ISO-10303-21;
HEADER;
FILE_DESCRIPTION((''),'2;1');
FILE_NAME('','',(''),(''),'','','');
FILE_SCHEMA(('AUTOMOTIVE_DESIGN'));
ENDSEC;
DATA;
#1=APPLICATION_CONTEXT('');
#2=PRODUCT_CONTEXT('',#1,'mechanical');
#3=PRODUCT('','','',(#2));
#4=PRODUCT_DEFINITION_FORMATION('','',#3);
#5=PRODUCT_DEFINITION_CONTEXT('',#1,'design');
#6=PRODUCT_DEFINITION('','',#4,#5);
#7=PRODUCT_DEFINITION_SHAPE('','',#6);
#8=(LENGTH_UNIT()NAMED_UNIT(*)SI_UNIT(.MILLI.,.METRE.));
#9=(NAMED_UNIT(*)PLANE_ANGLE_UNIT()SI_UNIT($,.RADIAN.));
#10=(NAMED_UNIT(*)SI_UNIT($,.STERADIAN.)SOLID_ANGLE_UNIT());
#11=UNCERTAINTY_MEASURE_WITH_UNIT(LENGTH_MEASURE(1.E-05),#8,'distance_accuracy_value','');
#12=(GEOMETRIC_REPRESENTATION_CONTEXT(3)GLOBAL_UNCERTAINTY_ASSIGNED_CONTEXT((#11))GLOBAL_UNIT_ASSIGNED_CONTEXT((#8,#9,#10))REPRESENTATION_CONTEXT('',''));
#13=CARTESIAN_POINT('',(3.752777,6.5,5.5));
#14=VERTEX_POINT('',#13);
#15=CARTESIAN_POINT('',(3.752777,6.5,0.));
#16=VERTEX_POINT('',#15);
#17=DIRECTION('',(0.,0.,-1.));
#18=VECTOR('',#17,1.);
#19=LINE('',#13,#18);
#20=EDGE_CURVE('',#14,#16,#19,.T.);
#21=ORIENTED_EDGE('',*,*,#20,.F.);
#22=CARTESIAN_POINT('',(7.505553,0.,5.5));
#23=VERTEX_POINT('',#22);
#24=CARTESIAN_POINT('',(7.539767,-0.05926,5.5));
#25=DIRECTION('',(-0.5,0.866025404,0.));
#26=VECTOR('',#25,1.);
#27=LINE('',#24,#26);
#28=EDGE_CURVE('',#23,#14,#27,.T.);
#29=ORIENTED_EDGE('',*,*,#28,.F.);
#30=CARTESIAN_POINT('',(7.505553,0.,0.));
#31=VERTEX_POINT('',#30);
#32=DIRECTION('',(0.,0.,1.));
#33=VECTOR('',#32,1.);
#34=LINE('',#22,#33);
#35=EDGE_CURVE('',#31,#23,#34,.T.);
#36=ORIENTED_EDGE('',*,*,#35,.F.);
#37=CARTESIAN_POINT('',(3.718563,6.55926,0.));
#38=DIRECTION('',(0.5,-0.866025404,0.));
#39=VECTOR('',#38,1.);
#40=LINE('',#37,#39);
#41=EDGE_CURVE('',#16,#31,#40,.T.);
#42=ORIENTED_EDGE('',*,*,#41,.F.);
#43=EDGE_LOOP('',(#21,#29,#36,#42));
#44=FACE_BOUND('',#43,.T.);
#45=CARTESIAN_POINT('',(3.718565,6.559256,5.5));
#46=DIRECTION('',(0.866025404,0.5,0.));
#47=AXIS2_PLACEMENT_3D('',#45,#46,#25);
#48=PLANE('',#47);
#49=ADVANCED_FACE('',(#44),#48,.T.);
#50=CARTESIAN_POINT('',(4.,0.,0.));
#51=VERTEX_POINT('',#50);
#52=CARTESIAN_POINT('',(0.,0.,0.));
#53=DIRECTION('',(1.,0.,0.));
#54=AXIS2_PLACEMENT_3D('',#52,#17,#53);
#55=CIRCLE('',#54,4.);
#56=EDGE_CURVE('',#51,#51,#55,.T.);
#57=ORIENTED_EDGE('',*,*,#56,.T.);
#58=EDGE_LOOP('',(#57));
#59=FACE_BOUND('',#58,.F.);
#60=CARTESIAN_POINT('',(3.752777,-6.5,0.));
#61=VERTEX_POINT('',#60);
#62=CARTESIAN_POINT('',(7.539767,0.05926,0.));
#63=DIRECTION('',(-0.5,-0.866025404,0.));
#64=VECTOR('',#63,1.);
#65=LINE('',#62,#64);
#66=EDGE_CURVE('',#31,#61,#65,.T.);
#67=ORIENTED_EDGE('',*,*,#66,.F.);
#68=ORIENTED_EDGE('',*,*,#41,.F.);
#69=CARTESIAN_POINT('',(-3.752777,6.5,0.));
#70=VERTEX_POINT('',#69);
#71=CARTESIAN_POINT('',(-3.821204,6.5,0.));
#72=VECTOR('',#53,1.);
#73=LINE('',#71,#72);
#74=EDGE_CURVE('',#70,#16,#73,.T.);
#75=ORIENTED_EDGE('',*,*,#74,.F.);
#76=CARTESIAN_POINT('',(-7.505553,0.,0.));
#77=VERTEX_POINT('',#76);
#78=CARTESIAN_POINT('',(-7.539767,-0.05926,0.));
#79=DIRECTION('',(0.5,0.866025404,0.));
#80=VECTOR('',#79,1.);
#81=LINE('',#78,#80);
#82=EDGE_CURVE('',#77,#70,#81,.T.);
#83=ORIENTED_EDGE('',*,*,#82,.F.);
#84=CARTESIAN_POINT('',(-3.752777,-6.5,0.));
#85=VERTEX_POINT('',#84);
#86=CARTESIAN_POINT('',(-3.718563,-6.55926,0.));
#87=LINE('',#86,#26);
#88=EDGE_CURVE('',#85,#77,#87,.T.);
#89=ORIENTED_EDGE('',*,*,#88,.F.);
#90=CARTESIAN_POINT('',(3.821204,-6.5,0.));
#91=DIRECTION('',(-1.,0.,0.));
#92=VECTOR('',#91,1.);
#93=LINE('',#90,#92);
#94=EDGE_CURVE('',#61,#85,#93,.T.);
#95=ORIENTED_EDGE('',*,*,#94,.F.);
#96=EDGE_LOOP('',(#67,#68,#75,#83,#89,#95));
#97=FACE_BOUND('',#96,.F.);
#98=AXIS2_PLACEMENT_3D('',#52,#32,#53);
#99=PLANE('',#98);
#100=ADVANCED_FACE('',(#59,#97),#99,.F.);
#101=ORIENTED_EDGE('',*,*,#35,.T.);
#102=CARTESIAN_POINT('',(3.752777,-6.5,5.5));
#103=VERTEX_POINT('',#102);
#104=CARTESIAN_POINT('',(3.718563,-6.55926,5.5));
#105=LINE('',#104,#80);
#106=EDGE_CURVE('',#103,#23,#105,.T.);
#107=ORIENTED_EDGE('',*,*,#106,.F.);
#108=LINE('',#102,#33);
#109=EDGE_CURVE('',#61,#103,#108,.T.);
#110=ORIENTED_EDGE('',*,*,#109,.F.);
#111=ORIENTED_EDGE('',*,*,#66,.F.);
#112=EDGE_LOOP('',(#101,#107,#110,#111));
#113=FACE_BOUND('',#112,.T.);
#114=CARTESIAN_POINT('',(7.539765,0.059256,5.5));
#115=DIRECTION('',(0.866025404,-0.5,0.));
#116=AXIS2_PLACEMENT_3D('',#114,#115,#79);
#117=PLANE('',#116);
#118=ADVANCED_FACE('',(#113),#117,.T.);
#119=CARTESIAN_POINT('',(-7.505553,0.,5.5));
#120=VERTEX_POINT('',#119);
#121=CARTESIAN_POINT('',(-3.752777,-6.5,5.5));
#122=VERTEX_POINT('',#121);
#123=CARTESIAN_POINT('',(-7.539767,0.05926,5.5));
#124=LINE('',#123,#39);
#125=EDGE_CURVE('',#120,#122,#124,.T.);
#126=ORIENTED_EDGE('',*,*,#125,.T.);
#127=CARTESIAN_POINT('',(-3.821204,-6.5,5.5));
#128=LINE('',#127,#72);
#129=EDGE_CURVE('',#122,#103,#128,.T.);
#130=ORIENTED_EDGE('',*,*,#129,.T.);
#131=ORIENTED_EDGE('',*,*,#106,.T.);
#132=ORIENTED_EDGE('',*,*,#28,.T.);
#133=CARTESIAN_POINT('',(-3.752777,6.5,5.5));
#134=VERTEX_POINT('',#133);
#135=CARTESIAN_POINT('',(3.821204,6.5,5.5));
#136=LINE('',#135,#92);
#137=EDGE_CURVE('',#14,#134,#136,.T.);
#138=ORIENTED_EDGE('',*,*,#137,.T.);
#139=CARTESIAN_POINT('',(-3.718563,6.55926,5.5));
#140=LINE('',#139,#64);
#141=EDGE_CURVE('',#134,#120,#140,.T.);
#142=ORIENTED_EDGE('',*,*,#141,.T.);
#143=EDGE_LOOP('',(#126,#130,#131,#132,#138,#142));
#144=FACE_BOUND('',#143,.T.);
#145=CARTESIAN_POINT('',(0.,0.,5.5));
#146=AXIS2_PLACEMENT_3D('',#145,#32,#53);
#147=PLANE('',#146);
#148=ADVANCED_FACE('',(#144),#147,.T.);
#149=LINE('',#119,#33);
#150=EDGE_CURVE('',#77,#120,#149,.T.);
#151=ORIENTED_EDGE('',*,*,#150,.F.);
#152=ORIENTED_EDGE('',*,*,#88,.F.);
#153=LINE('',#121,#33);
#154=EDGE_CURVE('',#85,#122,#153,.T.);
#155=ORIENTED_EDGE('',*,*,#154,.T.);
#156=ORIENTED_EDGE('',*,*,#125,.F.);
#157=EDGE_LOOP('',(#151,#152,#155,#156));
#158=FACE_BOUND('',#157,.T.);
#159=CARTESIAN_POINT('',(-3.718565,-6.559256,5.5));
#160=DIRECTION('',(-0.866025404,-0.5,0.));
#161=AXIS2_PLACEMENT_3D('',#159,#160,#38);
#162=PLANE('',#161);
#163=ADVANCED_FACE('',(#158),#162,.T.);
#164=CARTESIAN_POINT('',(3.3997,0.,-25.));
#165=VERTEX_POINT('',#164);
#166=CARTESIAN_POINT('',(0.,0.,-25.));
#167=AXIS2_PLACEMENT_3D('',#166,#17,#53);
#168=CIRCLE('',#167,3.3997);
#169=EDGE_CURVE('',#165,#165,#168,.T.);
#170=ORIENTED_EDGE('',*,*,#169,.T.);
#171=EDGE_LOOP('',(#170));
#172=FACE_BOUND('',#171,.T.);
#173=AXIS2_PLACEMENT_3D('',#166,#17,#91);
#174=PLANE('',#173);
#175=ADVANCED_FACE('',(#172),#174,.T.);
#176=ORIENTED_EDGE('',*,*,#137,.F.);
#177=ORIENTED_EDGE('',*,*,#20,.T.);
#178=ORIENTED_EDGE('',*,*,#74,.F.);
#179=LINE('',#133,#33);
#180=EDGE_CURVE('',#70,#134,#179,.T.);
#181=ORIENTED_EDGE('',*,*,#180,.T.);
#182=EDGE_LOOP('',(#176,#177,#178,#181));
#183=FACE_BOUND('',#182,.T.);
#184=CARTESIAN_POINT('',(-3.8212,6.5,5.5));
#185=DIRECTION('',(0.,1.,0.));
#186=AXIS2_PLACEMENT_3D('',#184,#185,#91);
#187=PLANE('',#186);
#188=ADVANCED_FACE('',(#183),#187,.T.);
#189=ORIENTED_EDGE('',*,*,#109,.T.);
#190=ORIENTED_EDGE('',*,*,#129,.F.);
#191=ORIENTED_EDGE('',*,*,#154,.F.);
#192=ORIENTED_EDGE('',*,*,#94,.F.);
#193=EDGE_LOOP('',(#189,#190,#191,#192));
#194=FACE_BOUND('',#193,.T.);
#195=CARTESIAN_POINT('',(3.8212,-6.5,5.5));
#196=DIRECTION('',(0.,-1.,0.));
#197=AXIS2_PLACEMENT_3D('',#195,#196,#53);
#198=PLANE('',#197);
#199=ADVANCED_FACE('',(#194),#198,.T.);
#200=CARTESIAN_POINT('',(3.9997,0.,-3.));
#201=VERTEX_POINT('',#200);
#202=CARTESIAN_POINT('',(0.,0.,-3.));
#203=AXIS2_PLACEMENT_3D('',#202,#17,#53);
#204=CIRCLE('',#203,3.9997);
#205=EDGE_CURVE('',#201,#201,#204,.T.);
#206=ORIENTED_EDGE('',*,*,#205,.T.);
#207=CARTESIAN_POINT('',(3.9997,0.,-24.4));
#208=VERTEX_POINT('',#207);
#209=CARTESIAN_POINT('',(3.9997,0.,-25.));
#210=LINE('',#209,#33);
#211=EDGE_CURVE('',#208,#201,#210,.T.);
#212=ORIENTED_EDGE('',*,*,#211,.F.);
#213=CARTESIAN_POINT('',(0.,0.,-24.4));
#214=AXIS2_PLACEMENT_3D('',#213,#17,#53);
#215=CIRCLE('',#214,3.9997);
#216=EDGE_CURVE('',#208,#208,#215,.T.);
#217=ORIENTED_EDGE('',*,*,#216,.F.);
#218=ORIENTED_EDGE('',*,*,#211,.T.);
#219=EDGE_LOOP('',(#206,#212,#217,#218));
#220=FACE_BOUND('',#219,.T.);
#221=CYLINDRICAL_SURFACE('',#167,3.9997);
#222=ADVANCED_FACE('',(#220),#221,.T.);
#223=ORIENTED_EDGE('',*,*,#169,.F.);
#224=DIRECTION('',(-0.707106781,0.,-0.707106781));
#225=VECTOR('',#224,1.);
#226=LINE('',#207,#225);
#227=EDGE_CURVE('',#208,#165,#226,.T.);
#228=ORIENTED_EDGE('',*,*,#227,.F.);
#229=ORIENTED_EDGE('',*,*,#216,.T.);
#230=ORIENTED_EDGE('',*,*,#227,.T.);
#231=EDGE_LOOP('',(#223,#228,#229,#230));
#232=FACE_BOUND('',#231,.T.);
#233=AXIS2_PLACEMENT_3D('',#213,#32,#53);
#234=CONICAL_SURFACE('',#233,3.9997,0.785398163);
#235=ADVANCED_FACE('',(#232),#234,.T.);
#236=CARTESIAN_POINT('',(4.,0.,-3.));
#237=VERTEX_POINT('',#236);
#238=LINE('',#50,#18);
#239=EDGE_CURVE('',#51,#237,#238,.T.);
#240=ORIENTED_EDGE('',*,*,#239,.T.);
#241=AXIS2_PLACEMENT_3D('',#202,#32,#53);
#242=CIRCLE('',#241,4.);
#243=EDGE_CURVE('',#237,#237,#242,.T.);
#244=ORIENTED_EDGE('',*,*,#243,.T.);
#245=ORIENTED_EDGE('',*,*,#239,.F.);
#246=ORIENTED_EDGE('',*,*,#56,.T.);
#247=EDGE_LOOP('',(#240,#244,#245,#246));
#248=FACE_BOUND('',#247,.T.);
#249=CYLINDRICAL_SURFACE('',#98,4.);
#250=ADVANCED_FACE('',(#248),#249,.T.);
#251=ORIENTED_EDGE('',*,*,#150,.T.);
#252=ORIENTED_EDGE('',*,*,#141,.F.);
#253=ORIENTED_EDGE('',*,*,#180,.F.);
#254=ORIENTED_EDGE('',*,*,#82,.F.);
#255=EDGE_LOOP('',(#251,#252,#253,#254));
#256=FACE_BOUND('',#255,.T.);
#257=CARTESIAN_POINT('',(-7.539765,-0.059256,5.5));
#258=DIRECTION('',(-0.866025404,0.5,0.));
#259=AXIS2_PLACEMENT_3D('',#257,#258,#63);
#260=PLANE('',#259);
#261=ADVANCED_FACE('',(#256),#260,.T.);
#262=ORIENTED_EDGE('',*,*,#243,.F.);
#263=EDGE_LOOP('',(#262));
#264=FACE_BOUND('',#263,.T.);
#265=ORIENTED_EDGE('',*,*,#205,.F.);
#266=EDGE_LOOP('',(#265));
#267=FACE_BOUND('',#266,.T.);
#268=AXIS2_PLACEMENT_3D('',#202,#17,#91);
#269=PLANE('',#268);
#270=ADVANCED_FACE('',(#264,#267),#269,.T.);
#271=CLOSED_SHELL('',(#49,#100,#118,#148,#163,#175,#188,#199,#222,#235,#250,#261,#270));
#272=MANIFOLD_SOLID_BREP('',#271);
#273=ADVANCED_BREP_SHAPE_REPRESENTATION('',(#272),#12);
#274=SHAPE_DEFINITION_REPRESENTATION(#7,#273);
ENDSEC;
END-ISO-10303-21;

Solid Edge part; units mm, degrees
sketch "Sketch1" plane through (0, 0, 0) normal (0, 0, 1) x (1, 0, 0)
  circle A0 centre (0, 0) radius 7.54
  dimension "D1" = 15.08
extrude "Protrusion1" add sketch "Sketch1" along normal blind 5.5
sketch "Sketch2" plane through (0, 0, 0) normal (0, 0, -1) x (1, 0, 0)
  circle A0 centre (0, 0) radius 4
extrude "Protrusion2" add sketch "Sketch2" along normal blind 25
sketch "Sketch3" plane through (0, 0, -25) normal (0, 0, -1) x (1, 0, 0)
  circle A0 centre (0, 0) radius 3.9997
extrude "Cutout1" cut sketch "Sketch3" against normal blind 22 flip side to cut
chamfer "Chamfer_1" distance 0.6 angle 45 1 edges at (-3.9997, 0, -25)
sketch "Sketch4" plane through (0, 0, 5.5) normal (0, 0, 1) x (1, 0, 0)
  line L0 (-3.8212, 6.5) -> (3.8212, 6.5)
  dimension "D1" = 13
extrude "Cutout2" cut sketch "Sketch4" against normal up to next material side at (0, 6.55, 5.5)
pattern_circular "Pattern1" count 6 over 360 about axis through (0, 0, 5.5) along (0, 0, 1) of "Cutout2"
properties part number "24104773"
